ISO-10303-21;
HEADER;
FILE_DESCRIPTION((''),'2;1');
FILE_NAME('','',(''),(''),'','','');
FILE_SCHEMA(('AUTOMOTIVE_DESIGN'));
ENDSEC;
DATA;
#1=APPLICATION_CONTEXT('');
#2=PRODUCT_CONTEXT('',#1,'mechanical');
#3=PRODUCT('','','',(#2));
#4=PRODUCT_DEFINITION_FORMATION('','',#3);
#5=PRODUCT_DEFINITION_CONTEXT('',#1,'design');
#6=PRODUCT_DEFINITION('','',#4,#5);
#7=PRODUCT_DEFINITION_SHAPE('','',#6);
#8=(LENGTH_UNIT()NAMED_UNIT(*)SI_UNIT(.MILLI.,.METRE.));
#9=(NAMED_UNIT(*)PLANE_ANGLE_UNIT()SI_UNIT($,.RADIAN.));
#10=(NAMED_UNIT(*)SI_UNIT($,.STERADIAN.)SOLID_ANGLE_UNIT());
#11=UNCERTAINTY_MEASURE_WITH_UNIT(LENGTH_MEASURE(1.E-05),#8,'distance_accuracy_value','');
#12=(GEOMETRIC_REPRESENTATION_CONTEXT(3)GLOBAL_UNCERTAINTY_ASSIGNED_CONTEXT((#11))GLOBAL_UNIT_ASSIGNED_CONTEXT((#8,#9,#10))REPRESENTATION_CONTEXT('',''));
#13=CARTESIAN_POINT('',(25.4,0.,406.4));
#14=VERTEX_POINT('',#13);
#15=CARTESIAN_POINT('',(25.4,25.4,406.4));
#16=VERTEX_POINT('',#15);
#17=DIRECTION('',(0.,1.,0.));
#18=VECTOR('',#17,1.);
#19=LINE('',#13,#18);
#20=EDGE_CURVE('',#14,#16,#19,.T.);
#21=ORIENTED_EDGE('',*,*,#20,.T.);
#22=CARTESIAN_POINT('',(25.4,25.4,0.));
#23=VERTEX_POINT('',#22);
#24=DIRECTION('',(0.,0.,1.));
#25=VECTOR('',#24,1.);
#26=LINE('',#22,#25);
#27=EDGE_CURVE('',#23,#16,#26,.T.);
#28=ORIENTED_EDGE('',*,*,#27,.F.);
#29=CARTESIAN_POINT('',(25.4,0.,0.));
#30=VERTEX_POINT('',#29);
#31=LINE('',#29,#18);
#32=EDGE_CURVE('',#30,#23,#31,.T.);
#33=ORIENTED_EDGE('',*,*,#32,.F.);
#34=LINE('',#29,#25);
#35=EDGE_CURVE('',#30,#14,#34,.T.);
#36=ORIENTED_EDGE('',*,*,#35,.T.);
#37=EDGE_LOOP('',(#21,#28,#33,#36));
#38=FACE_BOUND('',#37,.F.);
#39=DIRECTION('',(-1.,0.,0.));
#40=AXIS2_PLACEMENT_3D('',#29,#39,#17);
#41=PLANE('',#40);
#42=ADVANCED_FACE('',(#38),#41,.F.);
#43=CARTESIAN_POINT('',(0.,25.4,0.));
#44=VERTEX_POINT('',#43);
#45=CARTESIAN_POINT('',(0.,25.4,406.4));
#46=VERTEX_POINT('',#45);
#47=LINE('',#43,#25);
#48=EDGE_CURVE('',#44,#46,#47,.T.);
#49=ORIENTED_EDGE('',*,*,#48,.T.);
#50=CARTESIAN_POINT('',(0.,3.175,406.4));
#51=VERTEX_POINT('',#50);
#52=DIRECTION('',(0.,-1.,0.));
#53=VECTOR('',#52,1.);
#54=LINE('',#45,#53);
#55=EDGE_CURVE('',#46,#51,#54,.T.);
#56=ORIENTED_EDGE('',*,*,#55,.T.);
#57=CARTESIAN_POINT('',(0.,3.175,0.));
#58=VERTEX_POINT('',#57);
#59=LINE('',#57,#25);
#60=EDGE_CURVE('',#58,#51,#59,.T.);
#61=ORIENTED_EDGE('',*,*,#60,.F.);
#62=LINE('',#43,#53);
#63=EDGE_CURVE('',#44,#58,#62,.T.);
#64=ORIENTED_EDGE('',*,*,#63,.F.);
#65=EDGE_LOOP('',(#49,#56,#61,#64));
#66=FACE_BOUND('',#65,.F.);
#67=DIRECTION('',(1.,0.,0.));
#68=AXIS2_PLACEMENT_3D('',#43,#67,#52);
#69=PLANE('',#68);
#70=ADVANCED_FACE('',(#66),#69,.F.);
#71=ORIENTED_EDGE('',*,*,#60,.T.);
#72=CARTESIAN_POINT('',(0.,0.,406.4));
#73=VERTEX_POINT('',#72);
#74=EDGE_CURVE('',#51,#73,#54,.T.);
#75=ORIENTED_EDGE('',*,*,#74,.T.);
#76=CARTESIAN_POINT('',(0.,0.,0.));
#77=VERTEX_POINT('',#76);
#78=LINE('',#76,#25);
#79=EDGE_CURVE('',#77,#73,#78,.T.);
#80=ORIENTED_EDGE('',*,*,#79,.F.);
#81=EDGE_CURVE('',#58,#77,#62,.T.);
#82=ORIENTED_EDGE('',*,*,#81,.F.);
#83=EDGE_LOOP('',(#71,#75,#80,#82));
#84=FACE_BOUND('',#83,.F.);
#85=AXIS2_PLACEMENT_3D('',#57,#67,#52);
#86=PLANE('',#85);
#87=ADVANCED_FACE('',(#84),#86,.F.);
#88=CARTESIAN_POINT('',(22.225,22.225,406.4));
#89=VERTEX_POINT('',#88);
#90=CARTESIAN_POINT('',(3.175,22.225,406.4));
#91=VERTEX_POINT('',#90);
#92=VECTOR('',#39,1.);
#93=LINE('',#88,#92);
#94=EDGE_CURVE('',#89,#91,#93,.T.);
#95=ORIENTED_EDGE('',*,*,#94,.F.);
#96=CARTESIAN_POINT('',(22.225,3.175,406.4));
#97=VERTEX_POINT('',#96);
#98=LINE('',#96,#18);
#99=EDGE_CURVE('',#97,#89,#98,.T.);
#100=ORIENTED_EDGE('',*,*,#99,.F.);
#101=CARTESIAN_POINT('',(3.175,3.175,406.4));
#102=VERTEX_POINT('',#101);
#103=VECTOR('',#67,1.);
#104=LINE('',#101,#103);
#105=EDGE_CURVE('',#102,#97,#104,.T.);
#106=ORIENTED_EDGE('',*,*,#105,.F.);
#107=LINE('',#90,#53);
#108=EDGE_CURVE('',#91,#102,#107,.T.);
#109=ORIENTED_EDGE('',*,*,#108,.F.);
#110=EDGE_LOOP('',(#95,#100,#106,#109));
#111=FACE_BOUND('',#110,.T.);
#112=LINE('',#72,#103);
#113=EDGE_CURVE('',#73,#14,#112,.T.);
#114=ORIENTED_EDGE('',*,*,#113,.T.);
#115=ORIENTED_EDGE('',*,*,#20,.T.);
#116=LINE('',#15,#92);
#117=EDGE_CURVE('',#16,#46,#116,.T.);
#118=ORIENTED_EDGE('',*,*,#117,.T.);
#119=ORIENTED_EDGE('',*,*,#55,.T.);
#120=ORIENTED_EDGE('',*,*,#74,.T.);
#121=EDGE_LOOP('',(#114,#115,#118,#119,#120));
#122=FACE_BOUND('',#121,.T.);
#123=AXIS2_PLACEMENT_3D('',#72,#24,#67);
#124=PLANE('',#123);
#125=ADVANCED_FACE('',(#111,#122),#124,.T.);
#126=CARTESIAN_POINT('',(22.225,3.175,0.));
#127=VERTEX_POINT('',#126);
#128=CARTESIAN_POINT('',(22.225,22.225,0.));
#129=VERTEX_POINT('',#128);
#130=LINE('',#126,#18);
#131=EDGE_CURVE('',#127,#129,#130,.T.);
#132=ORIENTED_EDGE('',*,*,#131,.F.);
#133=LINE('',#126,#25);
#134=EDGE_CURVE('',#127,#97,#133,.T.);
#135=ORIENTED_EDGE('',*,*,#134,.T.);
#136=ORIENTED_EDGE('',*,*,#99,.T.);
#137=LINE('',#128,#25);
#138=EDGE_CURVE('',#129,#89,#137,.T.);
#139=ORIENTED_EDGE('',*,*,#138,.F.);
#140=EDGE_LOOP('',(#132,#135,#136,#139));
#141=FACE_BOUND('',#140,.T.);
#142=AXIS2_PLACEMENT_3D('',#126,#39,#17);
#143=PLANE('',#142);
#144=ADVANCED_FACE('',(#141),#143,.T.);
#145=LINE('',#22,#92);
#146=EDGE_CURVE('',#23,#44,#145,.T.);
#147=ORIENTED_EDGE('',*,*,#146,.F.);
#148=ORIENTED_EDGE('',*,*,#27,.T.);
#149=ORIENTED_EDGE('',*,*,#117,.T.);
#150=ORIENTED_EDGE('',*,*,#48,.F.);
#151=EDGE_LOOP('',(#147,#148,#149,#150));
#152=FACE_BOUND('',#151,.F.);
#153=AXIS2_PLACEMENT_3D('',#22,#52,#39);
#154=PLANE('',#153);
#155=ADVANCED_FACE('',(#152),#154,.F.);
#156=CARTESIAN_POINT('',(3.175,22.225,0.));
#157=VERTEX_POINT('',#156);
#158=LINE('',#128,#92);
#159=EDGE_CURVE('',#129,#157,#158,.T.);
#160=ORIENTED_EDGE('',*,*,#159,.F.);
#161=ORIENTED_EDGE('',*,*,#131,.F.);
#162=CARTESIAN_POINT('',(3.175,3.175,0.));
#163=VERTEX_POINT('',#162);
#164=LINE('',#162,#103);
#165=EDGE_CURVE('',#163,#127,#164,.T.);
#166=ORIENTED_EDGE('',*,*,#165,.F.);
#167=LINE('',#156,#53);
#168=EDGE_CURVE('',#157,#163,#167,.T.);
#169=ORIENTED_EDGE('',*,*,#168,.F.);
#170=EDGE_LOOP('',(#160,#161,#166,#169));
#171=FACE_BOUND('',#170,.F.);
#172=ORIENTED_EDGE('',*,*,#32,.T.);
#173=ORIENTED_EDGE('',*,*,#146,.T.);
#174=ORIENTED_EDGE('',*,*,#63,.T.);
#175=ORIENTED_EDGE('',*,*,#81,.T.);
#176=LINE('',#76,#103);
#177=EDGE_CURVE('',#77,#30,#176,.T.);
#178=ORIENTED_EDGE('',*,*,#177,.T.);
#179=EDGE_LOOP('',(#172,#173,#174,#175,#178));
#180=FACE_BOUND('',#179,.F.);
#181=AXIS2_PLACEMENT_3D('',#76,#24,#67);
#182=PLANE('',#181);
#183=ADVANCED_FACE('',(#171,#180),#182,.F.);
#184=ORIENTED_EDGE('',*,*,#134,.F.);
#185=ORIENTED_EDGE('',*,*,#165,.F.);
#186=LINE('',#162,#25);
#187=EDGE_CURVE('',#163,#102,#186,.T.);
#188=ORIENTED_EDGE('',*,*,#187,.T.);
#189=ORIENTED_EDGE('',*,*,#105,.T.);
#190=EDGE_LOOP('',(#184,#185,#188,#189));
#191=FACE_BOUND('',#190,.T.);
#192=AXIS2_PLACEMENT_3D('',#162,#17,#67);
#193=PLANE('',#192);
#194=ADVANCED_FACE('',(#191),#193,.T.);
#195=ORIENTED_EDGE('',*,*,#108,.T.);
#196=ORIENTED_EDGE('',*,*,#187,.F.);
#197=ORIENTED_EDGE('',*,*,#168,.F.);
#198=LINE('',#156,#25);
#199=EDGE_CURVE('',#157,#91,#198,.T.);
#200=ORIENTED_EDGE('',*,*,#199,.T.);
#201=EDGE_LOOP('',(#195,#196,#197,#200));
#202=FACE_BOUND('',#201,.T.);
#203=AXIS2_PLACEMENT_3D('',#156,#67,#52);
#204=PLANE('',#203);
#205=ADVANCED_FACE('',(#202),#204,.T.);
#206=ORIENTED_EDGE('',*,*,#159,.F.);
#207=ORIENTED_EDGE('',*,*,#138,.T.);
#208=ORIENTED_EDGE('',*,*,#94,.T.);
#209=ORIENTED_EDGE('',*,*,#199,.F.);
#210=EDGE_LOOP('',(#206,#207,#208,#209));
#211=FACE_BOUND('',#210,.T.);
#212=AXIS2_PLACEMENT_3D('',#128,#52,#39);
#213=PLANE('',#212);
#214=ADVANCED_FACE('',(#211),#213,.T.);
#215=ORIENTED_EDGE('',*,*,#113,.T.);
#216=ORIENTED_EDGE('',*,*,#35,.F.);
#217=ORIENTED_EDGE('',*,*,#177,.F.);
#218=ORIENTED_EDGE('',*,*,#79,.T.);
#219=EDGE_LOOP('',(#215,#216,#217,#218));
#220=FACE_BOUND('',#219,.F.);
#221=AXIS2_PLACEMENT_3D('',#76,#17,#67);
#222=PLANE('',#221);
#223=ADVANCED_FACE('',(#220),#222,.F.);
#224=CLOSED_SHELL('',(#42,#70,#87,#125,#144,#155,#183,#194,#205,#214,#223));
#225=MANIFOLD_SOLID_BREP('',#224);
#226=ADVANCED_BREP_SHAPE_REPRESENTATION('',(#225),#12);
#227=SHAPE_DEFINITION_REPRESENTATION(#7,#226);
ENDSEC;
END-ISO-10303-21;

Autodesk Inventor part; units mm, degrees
ref_plane "YZ Plane" through (0, 0, 0) normal (1, 0, 0) x (0, 1, 0)
ref_plane "XZ Plane" through (0, 0, 0) normal (0, 1, 0) x (-1, 0, 0)
ref_plane "XY Plane" through (0, 0, 0) normal (0, 0, 1) x (1, 0, 0)
sketch "Sketch1" plane through (0, 0, 0) normal (0, 0, 1) x (1, 0, 0)
  line L0 (0, 0) -> (25.4, 0)
  line L1 (25.4, 0) -> (25.4, 25.4)
  line L2 (25.4, 25.4) -> (0, 25.4)
  line L3 (0, 25.4) -> (0, 0)
  line L4 (0, 0) -> (0, 3.175)
  line L5 (0, 3.175) -> (3.175, 3.175)
  line L6 (3.175, 3.175) -> (22.225, 3.175)
  line L7 (22.225, 3.175) -> (22.225, 22.225)
  line L8 (22.225, 22.225) -> (3.175, 22.225)
  line L9 (3.175, 22.225) -> (3.175, 3.175)
  dimension "d0" = 25.4
  dimension "d1" = 25.4
  dimension "d2" = 3.175
  dimension "d3" = 3.175
  dimension "d4" = 19.05
  dimension "d5" = 19.05
extrude "Extrusion1" add sketch "Sketch1" along normal blind 406.4
properties part number "16inSquarePipe"
